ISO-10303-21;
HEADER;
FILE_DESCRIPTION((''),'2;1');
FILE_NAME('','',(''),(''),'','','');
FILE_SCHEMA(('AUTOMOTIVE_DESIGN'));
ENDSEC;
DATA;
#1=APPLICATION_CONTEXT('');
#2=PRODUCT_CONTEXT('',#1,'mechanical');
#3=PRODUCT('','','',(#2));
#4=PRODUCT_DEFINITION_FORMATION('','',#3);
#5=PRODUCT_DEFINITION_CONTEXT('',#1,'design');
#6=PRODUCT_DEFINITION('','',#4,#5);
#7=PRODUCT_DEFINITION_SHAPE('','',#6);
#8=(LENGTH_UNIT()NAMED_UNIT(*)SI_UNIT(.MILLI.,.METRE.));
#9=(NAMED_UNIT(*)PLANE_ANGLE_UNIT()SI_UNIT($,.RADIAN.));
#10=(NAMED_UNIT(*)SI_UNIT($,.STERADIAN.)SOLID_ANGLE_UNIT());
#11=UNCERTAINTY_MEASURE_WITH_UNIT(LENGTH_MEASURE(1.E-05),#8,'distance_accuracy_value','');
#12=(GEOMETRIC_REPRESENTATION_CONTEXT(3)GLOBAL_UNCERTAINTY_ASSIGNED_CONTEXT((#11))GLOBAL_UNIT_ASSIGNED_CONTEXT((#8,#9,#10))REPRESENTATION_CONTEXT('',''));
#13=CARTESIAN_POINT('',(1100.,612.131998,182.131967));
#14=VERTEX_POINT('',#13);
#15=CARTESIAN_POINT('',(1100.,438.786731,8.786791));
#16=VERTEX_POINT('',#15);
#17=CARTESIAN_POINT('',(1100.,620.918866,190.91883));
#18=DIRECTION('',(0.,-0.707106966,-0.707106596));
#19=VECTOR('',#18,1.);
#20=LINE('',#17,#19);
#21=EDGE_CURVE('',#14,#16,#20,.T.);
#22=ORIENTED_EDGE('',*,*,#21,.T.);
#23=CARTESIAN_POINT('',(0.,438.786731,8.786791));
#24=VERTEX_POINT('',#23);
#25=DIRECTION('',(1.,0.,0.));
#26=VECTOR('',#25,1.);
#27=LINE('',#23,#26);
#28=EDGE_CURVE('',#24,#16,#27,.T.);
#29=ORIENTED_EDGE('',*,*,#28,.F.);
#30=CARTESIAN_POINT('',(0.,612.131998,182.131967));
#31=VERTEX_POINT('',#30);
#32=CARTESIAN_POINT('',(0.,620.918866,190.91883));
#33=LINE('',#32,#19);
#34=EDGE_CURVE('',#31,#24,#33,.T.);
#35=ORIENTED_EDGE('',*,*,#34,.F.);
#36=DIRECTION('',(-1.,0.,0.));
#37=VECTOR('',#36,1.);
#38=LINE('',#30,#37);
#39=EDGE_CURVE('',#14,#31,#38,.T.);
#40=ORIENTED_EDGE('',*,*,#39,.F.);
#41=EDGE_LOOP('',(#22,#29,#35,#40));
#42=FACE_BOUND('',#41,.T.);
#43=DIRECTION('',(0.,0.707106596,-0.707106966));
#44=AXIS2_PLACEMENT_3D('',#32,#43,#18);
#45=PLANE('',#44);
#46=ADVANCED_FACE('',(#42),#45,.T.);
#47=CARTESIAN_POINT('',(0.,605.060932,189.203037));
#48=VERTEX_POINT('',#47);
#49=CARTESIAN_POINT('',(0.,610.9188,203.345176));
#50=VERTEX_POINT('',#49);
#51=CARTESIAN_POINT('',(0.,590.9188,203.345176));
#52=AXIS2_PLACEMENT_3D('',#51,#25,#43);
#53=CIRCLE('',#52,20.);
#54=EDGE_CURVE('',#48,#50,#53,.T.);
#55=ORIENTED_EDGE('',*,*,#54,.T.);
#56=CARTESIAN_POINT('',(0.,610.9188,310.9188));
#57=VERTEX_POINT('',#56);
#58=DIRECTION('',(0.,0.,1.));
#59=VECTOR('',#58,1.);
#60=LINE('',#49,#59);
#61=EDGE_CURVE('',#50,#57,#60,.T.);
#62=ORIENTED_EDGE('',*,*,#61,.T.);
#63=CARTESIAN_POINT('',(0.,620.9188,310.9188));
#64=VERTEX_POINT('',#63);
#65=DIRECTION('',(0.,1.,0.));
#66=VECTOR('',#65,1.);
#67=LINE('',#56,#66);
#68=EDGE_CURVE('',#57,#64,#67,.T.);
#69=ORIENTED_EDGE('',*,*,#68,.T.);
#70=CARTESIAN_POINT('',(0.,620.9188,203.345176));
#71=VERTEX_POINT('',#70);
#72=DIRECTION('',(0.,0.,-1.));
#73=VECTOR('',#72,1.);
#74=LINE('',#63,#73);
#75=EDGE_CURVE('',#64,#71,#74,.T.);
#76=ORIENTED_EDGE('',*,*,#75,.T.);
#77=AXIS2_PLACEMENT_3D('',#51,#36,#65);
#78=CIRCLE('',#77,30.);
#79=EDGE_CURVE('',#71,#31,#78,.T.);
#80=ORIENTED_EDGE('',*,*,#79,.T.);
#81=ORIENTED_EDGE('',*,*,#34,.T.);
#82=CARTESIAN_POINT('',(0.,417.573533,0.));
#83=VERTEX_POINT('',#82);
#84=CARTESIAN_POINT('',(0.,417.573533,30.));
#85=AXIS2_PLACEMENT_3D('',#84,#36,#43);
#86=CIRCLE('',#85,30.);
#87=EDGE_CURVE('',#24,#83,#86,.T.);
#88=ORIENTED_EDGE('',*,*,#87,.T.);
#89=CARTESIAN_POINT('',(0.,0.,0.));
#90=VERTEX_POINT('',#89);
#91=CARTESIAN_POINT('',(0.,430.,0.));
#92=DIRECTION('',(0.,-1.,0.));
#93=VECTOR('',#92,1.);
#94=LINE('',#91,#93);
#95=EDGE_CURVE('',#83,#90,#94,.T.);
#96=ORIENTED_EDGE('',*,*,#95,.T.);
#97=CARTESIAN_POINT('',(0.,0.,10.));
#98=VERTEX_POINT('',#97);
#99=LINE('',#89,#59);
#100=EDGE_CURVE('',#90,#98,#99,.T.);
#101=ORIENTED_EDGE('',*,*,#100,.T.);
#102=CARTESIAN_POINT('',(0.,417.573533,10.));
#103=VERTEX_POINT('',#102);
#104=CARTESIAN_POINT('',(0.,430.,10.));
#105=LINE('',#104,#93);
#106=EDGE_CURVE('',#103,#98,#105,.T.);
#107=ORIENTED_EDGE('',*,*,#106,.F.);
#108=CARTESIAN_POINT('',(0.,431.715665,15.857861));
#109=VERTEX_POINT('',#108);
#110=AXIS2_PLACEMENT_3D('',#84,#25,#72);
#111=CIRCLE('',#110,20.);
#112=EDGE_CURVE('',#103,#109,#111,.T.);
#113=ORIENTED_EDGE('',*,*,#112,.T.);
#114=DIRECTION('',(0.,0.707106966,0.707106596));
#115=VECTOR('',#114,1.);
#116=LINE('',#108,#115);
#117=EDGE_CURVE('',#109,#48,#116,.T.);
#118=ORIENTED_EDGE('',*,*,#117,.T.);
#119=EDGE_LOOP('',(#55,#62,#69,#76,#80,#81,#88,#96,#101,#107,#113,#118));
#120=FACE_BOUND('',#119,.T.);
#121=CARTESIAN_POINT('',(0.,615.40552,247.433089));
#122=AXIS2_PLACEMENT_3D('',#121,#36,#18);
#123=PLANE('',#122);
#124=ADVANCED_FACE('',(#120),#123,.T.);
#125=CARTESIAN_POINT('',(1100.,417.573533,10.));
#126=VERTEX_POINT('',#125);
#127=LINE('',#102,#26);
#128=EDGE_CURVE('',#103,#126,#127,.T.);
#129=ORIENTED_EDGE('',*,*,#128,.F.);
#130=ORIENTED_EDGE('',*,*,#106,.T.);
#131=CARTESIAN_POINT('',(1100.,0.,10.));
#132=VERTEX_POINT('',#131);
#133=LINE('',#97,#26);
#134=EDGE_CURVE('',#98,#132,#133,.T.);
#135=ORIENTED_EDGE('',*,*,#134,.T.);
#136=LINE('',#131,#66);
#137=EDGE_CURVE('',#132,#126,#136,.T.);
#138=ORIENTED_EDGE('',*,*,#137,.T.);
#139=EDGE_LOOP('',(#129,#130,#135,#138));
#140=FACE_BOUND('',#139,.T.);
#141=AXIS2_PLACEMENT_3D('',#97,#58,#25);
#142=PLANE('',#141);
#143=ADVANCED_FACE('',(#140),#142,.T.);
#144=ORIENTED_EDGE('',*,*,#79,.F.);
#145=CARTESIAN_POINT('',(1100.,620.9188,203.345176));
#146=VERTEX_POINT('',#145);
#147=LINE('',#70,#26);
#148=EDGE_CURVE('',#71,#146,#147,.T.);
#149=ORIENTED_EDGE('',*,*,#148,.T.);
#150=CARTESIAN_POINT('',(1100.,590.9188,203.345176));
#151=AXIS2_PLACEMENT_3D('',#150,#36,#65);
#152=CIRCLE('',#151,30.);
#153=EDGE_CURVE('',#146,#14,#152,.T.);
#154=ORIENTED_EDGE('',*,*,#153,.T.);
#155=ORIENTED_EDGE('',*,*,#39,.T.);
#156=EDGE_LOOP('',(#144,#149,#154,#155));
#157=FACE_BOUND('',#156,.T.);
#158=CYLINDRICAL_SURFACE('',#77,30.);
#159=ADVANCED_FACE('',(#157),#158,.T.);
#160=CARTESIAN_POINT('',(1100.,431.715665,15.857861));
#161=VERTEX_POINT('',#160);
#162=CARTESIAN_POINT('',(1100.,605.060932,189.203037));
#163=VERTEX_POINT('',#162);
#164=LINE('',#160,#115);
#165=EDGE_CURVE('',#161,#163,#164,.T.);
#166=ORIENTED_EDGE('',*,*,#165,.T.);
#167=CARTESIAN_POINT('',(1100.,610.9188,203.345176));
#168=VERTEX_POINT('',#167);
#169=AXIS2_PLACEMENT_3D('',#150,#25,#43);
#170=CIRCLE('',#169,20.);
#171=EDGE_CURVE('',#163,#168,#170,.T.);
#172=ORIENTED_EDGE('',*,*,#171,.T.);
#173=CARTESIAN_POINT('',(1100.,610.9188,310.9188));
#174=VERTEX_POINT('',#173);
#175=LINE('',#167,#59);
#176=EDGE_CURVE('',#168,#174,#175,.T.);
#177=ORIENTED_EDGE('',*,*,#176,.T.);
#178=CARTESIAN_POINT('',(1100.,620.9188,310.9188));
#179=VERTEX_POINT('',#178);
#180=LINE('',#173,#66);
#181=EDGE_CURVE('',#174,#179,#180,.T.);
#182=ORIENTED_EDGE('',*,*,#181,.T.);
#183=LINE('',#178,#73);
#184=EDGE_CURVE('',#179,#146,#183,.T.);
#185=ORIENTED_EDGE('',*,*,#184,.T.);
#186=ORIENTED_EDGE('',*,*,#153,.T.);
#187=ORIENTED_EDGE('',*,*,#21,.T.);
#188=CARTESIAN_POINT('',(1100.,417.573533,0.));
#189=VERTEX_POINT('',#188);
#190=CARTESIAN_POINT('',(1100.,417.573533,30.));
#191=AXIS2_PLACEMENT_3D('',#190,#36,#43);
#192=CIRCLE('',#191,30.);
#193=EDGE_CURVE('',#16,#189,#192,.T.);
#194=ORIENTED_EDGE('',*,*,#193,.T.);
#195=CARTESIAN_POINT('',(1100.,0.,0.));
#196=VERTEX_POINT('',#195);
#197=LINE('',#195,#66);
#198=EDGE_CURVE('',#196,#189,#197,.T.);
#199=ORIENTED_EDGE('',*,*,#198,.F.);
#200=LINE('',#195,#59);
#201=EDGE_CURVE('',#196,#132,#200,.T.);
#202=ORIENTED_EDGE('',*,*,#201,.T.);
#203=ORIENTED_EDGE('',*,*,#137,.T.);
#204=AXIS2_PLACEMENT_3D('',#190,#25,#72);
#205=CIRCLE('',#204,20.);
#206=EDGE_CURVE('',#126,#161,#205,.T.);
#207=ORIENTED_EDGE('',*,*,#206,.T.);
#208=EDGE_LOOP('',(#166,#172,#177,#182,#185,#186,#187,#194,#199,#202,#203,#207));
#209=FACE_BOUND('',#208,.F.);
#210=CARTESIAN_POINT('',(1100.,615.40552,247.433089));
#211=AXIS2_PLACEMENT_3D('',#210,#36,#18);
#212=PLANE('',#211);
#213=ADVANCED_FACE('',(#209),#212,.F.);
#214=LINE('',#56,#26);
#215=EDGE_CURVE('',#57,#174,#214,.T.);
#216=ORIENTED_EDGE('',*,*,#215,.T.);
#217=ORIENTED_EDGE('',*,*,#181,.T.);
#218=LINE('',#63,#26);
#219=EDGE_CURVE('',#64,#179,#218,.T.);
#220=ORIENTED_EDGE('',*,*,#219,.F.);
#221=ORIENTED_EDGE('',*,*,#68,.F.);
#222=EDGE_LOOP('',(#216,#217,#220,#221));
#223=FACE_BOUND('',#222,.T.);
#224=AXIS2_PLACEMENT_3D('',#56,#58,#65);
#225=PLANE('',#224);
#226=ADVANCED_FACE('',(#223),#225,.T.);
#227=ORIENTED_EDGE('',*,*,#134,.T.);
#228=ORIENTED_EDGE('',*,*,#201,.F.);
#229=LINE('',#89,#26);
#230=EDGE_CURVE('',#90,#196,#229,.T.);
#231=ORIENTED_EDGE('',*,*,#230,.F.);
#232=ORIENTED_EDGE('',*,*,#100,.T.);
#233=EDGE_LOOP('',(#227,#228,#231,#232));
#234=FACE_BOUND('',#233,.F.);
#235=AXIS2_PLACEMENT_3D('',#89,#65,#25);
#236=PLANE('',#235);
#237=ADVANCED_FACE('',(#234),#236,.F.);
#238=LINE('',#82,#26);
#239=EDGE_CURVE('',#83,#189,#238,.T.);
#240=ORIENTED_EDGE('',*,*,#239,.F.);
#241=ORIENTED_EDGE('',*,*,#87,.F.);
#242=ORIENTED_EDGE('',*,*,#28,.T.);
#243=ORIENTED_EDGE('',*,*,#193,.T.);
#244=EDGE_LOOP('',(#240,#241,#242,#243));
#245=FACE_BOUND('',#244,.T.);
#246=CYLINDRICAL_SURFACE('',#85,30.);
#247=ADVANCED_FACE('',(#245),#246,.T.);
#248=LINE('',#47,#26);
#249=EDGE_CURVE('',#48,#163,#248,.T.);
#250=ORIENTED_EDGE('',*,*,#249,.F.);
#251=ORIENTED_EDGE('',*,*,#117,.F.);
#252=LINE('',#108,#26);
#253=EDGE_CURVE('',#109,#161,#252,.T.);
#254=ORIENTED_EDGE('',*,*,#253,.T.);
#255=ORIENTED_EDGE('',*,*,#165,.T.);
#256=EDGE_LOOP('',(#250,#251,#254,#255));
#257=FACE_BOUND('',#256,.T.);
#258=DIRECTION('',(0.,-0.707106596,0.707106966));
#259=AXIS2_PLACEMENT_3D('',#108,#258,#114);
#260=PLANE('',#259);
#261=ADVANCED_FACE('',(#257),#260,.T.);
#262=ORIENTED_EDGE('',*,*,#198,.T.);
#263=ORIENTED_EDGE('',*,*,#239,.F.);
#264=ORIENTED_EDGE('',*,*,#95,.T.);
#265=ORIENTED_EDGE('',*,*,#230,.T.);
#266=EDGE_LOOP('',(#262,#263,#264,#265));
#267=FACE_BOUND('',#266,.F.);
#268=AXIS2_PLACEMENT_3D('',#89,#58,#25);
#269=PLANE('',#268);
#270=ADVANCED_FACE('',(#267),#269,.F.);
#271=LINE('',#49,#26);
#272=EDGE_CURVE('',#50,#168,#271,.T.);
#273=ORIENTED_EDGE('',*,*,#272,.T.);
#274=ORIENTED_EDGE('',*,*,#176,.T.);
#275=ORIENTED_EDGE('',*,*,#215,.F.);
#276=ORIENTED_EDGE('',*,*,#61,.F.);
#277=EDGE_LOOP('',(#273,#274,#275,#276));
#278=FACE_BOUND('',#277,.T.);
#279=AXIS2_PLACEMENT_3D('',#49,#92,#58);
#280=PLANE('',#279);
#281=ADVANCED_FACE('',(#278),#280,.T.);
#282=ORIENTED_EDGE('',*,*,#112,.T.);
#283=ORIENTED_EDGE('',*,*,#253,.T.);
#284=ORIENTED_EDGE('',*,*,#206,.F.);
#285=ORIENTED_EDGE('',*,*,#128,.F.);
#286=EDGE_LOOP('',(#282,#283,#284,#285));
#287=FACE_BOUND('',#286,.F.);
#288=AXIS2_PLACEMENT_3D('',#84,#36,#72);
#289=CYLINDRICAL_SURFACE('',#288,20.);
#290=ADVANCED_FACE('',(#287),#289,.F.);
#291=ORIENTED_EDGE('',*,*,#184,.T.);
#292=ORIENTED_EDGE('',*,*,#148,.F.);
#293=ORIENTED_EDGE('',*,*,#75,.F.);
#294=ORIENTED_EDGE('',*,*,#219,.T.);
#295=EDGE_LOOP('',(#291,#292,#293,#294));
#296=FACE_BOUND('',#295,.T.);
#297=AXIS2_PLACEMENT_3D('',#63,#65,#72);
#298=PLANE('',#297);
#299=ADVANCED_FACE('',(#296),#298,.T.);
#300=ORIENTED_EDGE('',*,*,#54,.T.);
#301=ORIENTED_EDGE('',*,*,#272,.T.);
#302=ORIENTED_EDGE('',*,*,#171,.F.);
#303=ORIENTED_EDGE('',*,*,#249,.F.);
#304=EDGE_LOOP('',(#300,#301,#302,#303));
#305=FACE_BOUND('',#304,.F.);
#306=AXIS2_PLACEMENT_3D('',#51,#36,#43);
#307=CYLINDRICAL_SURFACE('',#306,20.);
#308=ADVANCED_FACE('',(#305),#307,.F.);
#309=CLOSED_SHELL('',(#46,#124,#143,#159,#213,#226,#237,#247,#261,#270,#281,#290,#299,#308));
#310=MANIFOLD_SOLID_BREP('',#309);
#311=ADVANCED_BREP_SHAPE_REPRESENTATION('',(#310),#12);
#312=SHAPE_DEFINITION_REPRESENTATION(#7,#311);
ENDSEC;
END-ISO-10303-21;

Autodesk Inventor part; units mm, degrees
ref_plane "YZ Plane" through (0, 0, 0) normal (1, 0, 0) x (0, 1, 0)
ref_plane "XZ Plane" through (0, 0, 0) normal (0, 1, 0) x (-1, 0, 0)
ref_plane "XY Plane" through (0, 0, 0) normal (0, 0, 1) x (1, 0, 0)
sketch "Sketch1" plane through (0, 0, 0) normal (0, 0, 1) x (1, 0, 0)
  line L0 (0, 0) -> (1100, 0)
  line L1 (1100, 0) -> (1100, 430)
  line L2 (1100, 430) -> (0, 430)
  line L3 (0, 430) -> (0, 0)
  dimension "d0" = 1100
  dimension "d1" = 430
extrude "Plate1" add sketch "Sketch1" along normal blind 10
sketch "Sketch2" plane through (0, 422.9289, 7.0711) normal (0, 0.7071068, -0.7071068) x (-1, 0, 0)
  line L0 (-1100, 0) -> (0, 0)
  line L1 (0, 0) -> (0, 270)
  line L2 (0, 270) -> (-1100, 270)
  line L3 (-1100, 270) -> (-1100, 0)
edge flange "Flange1" height 270 angle 45 thickness 10 bend radius 20 thickness toward (0, 0.7071068, -0.7071068) relief tear relief width 10 relief depth 5 edges at (550, 430, 10) wall of the first edge with corners at (1100, 422.9289, 7.0711) (0, 422.9289, 7.0711) (0, 613.8478, 197.9899) (1100, 613.8478, 197.9899)
bend "Bend1"
corner "Corner1"
sketch "Sketch3" plane through (0, 610.9188, 190.9188) normal (0, 1, 0) x (-1, 0, 0)
  line L0 (-1100, 0) -> (0, 0)
  line L1 (0, 0) -> (0, 120)
  line L2 (0, 120) -> (-1100, 120)
  line L3 (-1100, 120) -> (-1100, 0)
edge flange "Flange2" height 120 angle 45 thickness 10 bend radius 20 thickness toward (0, 1, 0) relief tear relief width 10 relief depth 5 edges at (550, 613.8478, 197.9899) wall of the first edge with corners at (1100, 610.9188, 190.9188) (0, 610.9188, 190.9188) (0, 610.9188, 310.9188) (1100, 610.9188, 310.9188)
bend "Bend2"
corner "Corner2"
equation "\"d2\" = Thickness"
equation "\"d3\" = BendReliefWidth"
equation "\"d4\" = BendReliefDepth"
equation "\"d5\" = MinimumRemnant"
equation "\"d6\" = TransitionRadius"
equation "\"d10\" = CornerReliefSize"
equation "\"d11\" = GapSize"
equation "\"d12\" = JacobiRadiusSize"
equation "\"d13\" = BendReliefWidth"
equation "\"d14\" = BendReliefDepth"
equation "\"d15\" = MinimumRemnant"
equation "\"d16\" = TransitionRadius"
equation "\"d20\" = CornerReliefSize"
equation "\"d21\" = GapSize"
equation "\"d22\" = JacobiRadiusSize"
equation "\"BendReliefDepth\" = 0.5 * Thickness"
equation "\"Thickness\" = 10"
equation "\"BendReliefWidth\" = 10"
equation "\"MinimumRemnant\" = 20"
equation "\"TransitionRadius\" = 10"
equation "\"CornerReliefSize\" = 40"
equation "\"GapSize\" = 10"
equation "\"JacobiRadiusSize\" = 10"
properties part number "10mm Polycarb" material "Polycarbonate, Clear"
